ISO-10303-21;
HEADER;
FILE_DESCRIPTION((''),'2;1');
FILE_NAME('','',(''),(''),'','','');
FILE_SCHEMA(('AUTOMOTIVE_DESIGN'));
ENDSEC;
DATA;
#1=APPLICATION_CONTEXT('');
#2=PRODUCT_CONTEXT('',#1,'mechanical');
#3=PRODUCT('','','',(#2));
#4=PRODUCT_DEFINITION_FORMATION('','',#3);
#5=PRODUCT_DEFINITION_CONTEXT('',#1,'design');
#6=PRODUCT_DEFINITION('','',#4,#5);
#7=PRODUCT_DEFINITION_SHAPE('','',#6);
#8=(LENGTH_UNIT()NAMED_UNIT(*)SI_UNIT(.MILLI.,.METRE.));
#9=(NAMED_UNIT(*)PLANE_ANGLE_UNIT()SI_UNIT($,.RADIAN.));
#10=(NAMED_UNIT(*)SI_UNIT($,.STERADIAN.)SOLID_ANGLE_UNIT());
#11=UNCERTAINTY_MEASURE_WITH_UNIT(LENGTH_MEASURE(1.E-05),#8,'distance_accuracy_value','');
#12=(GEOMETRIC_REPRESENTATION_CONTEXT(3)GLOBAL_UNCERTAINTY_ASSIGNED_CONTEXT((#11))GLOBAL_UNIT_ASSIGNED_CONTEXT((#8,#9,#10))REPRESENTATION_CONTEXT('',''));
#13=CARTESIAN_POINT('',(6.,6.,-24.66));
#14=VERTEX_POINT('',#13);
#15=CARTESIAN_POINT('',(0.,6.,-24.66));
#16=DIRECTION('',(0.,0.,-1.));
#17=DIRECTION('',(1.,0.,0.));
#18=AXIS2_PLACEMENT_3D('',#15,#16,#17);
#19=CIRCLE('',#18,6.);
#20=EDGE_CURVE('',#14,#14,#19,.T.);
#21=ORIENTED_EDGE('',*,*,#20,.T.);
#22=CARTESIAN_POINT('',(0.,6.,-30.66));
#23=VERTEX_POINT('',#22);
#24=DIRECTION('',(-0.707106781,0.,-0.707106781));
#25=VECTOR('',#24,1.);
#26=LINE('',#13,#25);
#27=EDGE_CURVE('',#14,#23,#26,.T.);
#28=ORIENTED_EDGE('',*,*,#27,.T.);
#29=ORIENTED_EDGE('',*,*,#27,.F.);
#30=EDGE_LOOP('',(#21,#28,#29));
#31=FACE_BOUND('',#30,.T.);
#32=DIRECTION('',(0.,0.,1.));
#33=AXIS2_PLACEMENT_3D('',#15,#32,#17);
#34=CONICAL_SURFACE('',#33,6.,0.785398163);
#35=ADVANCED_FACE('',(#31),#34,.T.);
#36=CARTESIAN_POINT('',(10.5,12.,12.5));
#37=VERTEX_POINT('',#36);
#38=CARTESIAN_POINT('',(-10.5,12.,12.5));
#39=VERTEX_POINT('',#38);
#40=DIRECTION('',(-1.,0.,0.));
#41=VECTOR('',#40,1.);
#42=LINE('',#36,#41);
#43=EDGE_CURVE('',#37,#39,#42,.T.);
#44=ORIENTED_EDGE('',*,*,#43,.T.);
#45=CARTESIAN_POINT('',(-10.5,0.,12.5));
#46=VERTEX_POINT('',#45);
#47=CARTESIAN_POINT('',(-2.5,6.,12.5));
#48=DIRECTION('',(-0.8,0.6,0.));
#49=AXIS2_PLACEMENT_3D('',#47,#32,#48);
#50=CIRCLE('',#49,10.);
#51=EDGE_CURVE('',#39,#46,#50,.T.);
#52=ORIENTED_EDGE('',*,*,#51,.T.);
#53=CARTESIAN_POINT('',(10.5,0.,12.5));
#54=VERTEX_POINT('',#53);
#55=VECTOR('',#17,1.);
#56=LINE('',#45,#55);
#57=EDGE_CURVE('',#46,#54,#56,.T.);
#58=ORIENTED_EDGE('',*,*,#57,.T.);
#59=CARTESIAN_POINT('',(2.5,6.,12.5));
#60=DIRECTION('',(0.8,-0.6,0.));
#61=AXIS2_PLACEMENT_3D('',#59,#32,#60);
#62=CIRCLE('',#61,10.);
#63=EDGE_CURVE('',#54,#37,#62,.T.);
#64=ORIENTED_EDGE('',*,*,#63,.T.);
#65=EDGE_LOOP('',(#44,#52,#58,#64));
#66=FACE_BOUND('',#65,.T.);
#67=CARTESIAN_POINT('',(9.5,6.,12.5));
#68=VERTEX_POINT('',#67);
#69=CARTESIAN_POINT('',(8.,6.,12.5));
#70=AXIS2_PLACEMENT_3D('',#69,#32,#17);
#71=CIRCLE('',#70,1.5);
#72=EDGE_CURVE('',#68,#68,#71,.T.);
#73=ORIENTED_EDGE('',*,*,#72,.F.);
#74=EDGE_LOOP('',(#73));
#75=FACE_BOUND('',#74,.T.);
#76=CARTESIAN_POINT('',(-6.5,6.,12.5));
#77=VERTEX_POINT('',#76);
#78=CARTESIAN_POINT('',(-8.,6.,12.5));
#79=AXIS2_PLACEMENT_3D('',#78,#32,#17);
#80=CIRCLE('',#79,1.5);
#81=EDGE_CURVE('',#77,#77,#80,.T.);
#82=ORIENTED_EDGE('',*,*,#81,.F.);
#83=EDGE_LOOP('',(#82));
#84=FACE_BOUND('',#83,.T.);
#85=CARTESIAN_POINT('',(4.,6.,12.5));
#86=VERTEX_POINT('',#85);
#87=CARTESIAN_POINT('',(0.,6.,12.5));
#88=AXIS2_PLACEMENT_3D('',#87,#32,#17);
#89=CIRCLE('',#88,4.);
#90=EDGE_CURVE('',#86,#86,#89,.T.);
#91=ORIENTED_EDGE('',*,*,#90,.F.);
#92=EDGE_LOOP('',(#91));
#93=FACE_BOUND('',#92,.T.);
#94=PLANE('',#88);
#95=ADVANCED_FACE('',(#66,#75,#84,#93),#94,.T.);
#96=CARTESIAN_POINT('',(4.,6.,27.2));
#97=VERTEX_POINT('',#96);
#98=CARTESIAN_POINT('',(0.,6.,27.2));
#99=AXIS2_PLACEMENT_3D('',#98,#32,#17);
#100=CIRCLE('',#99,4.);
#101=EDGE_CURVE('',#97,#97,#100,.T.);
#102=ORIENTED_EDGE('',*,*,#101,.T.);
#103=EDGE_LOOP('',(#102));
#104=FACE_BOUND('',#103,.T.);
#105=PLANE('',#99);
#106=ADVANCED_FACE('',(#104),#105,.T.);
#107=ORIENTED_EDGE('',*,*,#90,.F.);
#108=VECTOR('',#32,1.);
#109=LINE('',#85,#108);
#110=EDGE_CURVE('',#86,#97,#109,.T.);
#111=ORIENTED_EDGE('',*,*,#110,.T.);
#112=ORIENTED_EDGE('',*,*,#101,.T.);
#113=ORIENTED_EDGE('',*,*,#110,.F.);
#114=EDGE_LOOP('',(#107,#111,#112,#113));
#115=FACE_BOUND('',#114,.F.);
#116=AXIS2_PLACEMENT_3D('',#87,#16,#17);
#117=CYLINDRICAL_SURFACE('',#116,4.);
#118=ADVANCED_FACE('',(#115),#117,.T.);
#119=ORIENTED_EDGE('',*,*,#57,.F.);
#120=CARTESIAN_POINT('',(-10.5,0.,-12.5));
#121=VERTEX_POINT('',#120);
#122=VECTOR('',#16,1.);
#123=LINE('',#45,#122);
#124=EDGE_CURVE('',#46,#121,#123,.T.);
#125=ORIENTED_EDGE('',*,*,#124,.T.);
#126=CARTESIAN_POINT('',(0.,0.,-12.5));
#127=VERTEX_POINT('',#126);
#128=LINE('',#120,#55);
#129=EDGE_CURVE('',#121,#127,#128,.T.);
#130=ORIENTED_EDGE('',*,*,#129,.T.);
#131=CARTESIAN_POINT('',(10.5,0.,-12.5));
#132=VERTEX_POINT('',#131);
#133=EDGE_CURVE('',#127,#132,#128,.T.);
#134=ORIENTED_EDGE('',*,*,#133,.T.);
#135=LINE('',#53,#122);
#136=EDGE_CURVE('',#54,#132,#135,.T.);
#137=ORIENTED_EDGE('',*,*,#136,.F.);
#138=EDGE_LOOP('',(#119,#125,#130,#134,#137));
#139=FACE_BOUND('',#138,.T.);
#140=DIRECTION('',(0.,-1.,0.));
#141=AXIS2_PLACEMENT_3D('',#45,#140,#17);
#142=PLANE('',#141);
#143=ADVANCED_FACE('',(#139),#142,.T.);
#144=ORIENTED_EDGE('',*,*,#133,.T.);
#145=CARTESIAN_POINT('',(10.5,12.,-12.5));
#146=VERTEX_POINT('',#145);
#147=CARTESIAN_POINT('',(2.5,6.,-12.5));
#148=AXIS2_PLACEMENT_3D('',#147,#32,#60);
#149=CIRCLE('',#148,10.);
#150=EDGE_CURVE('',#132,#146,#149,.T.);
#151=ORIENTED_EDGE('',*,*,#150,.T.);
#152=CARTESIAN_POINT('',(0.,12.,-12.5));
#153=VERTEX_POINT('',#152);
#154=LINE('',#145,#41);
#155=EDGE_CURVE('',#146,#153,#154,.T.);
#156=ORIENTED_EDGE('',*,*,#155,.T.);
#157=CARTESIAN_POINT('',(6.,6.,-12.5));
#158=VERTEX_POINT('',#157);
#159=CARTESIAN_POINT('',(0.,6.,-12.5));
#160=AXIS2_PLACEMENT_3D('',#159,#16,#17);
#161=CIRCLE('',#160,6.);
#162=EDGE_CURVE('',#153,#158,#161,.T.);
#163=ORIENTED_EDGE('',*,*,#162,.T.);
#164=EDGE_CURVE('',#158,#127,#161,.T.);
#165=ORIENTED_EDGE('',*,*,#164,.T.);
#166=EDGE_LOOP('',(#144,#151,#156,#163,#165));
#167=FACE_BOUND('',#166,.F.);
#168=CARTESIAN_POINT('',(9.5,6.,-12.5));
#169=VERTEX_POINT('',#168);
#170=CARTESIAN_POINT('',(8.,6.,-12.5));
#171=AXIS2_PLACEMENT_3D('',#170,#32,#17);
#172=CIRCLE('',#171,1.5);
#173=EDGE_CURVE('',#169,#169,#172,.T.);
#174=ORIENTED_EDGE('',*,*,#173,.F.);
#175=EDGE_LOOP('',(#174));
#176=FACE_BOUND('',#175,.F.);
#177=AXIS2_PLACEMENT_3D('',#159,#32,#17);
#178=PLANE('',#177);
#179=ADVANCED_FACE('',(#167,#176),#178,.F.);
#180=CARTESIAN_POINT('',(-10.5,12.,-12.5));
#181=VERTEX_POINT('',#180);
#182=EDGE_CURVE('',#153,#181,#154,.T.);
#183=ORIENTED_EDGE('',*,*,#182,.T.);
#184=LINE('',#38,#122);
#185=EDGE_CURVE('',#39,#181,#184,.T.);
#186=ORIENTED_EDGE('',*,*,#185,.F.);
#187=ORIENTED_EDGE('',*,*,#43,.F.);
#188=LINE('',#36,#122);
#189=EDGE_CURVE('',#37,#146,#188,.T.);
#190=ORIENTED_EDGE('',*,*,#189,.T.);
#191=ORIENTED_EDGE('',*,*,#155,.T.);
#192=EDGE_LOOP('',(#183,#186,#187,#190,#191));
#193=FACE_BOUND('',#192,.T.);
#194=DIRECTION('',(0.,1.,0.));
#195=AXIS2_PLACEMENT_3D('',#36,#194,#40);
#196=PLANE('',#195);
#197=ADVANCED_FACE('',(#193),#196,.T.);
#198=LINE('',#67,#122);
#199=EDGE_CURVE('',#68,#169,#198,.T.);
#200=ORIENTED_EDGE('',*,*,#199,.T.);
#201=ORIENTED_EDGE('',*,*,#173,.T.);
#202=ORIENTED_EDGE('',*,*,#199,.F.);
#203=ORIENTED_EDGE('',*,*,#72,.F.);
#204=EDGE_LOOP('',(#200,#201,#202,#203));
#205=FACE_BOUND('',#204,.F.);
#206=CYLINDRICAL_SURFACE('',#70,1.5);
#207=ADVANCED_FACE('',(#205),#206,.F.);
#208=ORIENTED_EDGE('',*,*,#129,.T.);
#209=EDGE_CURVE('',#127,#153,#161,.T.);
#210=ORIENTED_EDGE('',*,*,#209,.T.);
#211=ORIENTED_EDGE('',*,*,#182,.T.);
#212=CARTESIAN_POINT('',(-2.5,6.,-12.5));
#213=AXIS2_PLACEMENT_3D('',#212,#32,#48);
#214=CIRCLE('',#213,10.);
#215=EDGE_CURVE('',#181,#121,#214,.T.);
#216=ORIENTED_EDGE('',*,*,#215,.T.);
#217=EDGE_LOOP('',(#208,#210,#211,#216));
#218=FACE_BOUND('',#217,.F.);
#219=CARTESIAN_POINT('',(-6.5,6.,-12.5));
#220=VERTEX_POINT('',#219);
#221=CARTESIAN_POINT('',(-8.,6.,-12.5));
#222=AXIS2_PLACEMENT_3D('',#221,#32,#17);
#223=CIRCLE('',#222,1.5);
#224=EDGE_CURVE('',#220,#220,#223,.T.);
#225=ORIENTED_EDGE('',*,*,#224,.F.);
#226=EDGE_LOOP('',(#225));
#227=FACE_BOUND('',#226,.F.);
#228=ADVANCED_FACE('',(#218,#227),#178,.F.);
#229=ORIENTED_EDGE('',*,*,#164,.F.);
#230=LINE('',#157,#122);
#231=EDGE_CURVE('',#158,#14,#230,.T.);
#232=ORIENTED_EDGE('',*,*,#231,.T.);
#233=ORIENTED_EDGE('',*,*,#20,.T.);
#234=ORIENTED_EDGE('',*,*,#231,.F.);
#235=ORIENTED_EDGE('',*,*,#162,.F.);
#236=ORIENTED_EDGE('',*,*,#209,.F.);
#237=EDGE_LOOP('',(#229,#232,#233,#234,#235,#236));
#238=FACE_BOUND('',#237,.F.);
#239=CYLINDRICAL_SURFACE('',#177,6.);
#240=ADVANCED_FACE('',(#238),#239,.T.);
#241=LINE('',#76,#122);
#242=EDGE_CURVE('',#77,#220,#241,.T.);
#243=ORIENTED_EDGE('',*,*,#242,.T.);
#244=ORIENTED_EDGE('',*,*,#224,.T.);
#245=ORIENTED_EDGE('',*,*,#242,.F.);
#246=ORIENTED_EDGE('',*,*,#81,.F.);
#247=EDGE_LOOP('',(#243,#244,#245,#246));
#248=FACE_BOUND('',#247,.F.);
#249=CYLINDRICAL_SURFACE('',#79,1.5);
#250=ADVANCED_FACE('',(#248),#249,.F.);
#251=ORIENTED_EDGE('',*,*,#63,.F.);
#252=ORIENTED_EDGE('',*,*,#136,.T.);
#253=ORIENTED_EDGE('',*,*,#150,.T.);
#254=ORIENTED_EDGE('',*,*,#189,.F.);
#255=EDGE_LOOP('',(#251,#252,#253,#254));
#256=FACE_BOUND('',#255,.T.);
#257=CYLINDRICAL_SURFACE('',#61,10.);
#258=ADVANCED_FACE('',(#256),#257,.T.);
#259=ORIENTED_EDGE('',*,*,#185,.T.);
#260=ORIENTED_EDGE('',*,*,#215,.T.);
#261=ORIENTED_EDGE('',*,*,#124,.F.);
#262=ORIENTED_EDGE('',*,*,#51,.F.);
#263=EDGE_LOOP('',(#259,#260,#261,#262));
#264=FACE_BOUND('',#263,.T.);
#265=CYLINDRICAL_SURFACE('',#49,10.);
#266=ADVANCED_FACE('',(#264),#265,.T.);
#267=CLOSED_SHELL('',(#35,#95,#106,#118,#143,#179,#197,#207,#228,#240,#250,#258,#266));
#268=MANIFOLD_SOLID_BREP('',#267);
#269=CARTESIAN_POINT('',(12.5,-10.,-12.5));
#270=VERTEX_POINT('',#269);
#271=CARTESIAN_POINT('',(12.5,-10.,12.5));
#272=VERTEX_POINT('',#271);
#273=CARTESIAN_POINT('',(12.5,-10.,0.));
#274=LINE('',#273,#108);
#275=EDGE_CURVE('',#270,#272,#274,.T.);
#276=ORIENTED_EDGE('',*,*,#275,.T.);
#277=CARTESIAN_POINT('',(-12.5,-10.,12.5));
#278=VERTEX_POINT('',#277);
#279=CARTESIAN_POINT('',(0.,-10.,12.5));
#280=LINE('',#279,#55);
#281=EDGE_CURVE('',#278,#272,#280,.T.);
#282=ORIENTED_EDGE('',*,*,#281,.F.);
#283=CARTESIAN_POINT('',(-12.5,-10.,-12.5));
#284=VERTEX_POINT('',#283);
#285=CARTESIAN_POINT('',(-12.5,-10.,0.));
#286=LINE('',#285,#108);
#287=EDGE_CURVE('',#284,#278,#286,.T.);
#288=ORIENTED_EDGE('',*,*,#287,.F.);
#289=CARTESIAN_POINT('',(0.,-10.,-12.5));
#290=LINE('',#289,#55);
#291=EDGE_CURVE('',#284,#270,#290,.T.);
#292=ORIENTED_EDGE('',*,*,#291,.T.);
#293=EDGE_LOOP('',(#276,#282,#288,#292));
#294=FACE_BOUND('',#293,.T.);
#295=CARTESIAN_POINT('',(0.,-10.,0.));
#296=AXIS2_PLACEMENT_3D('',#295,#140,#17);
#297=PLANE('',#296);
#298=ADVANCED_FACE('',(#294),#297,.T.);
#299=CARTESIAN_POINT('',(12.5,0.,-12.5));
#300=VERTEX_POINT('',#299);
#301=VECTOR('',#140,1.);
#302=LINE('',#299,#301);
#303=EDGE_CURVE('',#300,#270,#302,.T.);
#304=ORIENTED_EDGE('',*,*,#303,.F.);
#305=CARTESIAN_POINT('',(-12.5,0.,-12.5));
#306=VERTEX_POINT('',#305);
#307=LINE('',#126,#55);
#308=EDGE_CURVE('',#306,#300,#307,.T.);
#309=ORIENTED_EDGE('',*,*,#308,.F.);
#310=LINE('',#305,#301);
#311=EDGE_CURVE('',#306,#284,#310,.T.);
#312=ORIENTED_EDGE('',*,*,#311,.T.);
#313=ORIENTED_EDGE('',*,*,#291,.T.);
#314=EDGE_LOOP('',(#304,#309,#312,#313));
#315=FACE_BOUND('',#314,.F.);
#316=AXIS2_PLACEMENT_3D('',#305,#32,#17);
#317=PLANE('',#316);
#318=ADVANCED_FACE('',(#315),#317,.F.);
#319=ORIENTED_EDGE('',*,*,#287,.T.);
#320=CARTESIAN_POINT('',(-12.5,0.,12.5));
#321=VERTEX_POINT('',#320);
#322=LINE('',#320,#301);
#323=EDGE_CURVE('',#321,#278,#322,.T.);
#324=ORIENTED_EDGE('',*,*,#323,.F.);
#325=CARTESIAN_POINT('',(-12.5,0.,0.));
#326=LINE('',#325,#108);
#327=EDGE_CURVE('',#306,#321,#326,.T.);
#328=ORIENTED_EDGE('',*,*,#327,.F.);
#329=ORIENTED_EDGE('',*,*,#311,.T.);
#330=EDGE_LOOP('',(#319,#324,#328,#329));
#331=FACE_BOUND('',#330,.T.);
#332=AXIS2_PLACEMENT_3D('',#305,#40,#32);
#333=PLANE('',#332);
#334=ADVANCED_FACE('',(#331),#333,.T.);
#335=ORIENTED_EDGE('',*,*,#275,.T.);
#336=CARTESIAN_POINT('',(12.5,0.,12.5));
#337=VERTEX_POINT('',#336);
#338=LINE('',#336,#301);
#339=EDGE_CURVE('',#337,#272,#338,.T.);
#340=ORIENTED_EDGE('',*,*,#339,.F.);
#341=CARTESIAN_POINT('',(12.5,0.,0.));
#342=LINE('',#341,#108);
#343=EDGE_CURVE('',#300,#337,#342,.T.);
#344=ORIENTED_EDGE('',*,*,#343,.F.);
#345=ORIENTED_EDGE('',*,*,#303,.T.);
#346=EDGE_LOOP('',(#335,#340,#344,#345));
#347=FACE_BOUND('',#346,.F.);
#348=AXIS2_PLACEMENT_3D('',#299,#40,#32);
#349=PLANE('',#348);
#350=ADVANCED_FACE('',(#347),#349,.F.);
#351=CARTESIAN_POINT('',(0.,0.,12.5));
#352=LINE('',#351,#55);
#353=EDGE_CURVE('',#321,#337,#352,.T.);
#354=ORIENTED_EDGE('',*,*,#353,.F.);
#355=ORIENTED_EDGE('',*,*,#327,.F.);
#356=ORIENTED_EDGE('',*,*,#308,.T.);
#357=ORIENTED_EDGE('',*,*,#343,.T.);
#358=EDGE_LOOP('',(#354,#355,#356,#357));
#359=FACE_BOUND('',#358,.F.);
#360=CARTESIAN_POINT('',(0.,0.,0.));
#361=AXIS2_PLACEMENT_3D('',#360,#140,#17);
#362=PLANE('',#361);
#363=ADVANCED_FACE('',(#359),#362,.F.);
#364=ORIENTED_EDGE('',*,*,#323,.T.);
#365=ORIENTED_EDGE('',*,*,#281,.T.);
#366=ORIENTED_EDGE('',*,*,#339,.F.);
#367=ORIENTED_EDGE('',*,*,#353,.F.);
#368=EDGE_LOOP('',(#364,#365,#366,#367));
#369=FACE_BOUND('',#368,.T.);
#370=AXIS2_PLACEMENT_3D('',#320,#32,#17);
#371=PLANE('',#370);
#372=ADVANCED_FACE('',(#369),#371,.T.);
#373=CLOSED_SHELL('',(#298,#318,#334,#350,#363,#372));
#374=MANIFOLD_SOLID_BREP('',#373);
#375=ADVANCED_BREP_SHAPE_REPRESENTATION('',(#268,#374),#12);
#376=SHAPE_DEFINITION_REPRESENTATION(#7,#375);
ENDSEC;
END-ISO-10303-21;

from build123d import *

# Parameters (mm, degrees)
F0_W     = 25
F0_H     = 25
F1_DEPTH = 10
F2_R     = 1.5
F3_DEPTH = 25
F4_R     = 4
F5_DEPTH = 14.7
F6_R     = 6
F7_DEPTH = 18.16
F8_SIZE  = 6


with BuildPart() as f1:
    # F0 (on Front) → F1 (new body)
    with BuildSketch(Plane.XZ):
        Rectangle(F0_W, F0_H)
    extrude(amount=F1_DEPTH)


with BuildPart() as f3:
    # F2 (on face) → F3 (new body)
    with BuildSketch(Plane.XY.offset(12.5)):
        with BuildLine():
            Line((10.5, 12), (-10.5, 12))
            ThreePointArc((-10.5, 12), (-12.5, 6), (-10.5, 0))
            Line((-10.5, 0), (10.5, 0))
            ThreePointArc((10.5, 0), (12.5, 6), (10.5, 12))
        make_face()
        with Locations((-8, 6)):
            Circle(F2_R, mode=Mode.SUBTRACT)
        with Locations((8, 6)):
            Circle(F2_R, mode=Mode.SUBTRACT)
    extrude(amount=-F3_DEPTH)

    # F4 (on face) → F5 (join)
    with BuildSketch(Plane.XY.offset(12.5)):
        with Locations((0, 6)):
            Circle(F4_R)
    extrude(amount=F5_DEPTH)

    # F6 (on face) → F7 (join)
    with BuildSketch(Plane(origin=(0, 0, -12.5), x_dir=(1, 0, 0), z_dir=(0, 0, -1))):
        with Locations((0, -6)):
            Circle(F6_R)
    extrude(amount=F7_DEPTH)

    # F8
    f8_edges = [f3.edges().sort_by_distance(p)[0] for p in [
        (-6, 6, -30.66),
    ]]
    chamfer(f8_edges, length=F8_SIZE)


solid = Compound([f1.part, f3.part])
